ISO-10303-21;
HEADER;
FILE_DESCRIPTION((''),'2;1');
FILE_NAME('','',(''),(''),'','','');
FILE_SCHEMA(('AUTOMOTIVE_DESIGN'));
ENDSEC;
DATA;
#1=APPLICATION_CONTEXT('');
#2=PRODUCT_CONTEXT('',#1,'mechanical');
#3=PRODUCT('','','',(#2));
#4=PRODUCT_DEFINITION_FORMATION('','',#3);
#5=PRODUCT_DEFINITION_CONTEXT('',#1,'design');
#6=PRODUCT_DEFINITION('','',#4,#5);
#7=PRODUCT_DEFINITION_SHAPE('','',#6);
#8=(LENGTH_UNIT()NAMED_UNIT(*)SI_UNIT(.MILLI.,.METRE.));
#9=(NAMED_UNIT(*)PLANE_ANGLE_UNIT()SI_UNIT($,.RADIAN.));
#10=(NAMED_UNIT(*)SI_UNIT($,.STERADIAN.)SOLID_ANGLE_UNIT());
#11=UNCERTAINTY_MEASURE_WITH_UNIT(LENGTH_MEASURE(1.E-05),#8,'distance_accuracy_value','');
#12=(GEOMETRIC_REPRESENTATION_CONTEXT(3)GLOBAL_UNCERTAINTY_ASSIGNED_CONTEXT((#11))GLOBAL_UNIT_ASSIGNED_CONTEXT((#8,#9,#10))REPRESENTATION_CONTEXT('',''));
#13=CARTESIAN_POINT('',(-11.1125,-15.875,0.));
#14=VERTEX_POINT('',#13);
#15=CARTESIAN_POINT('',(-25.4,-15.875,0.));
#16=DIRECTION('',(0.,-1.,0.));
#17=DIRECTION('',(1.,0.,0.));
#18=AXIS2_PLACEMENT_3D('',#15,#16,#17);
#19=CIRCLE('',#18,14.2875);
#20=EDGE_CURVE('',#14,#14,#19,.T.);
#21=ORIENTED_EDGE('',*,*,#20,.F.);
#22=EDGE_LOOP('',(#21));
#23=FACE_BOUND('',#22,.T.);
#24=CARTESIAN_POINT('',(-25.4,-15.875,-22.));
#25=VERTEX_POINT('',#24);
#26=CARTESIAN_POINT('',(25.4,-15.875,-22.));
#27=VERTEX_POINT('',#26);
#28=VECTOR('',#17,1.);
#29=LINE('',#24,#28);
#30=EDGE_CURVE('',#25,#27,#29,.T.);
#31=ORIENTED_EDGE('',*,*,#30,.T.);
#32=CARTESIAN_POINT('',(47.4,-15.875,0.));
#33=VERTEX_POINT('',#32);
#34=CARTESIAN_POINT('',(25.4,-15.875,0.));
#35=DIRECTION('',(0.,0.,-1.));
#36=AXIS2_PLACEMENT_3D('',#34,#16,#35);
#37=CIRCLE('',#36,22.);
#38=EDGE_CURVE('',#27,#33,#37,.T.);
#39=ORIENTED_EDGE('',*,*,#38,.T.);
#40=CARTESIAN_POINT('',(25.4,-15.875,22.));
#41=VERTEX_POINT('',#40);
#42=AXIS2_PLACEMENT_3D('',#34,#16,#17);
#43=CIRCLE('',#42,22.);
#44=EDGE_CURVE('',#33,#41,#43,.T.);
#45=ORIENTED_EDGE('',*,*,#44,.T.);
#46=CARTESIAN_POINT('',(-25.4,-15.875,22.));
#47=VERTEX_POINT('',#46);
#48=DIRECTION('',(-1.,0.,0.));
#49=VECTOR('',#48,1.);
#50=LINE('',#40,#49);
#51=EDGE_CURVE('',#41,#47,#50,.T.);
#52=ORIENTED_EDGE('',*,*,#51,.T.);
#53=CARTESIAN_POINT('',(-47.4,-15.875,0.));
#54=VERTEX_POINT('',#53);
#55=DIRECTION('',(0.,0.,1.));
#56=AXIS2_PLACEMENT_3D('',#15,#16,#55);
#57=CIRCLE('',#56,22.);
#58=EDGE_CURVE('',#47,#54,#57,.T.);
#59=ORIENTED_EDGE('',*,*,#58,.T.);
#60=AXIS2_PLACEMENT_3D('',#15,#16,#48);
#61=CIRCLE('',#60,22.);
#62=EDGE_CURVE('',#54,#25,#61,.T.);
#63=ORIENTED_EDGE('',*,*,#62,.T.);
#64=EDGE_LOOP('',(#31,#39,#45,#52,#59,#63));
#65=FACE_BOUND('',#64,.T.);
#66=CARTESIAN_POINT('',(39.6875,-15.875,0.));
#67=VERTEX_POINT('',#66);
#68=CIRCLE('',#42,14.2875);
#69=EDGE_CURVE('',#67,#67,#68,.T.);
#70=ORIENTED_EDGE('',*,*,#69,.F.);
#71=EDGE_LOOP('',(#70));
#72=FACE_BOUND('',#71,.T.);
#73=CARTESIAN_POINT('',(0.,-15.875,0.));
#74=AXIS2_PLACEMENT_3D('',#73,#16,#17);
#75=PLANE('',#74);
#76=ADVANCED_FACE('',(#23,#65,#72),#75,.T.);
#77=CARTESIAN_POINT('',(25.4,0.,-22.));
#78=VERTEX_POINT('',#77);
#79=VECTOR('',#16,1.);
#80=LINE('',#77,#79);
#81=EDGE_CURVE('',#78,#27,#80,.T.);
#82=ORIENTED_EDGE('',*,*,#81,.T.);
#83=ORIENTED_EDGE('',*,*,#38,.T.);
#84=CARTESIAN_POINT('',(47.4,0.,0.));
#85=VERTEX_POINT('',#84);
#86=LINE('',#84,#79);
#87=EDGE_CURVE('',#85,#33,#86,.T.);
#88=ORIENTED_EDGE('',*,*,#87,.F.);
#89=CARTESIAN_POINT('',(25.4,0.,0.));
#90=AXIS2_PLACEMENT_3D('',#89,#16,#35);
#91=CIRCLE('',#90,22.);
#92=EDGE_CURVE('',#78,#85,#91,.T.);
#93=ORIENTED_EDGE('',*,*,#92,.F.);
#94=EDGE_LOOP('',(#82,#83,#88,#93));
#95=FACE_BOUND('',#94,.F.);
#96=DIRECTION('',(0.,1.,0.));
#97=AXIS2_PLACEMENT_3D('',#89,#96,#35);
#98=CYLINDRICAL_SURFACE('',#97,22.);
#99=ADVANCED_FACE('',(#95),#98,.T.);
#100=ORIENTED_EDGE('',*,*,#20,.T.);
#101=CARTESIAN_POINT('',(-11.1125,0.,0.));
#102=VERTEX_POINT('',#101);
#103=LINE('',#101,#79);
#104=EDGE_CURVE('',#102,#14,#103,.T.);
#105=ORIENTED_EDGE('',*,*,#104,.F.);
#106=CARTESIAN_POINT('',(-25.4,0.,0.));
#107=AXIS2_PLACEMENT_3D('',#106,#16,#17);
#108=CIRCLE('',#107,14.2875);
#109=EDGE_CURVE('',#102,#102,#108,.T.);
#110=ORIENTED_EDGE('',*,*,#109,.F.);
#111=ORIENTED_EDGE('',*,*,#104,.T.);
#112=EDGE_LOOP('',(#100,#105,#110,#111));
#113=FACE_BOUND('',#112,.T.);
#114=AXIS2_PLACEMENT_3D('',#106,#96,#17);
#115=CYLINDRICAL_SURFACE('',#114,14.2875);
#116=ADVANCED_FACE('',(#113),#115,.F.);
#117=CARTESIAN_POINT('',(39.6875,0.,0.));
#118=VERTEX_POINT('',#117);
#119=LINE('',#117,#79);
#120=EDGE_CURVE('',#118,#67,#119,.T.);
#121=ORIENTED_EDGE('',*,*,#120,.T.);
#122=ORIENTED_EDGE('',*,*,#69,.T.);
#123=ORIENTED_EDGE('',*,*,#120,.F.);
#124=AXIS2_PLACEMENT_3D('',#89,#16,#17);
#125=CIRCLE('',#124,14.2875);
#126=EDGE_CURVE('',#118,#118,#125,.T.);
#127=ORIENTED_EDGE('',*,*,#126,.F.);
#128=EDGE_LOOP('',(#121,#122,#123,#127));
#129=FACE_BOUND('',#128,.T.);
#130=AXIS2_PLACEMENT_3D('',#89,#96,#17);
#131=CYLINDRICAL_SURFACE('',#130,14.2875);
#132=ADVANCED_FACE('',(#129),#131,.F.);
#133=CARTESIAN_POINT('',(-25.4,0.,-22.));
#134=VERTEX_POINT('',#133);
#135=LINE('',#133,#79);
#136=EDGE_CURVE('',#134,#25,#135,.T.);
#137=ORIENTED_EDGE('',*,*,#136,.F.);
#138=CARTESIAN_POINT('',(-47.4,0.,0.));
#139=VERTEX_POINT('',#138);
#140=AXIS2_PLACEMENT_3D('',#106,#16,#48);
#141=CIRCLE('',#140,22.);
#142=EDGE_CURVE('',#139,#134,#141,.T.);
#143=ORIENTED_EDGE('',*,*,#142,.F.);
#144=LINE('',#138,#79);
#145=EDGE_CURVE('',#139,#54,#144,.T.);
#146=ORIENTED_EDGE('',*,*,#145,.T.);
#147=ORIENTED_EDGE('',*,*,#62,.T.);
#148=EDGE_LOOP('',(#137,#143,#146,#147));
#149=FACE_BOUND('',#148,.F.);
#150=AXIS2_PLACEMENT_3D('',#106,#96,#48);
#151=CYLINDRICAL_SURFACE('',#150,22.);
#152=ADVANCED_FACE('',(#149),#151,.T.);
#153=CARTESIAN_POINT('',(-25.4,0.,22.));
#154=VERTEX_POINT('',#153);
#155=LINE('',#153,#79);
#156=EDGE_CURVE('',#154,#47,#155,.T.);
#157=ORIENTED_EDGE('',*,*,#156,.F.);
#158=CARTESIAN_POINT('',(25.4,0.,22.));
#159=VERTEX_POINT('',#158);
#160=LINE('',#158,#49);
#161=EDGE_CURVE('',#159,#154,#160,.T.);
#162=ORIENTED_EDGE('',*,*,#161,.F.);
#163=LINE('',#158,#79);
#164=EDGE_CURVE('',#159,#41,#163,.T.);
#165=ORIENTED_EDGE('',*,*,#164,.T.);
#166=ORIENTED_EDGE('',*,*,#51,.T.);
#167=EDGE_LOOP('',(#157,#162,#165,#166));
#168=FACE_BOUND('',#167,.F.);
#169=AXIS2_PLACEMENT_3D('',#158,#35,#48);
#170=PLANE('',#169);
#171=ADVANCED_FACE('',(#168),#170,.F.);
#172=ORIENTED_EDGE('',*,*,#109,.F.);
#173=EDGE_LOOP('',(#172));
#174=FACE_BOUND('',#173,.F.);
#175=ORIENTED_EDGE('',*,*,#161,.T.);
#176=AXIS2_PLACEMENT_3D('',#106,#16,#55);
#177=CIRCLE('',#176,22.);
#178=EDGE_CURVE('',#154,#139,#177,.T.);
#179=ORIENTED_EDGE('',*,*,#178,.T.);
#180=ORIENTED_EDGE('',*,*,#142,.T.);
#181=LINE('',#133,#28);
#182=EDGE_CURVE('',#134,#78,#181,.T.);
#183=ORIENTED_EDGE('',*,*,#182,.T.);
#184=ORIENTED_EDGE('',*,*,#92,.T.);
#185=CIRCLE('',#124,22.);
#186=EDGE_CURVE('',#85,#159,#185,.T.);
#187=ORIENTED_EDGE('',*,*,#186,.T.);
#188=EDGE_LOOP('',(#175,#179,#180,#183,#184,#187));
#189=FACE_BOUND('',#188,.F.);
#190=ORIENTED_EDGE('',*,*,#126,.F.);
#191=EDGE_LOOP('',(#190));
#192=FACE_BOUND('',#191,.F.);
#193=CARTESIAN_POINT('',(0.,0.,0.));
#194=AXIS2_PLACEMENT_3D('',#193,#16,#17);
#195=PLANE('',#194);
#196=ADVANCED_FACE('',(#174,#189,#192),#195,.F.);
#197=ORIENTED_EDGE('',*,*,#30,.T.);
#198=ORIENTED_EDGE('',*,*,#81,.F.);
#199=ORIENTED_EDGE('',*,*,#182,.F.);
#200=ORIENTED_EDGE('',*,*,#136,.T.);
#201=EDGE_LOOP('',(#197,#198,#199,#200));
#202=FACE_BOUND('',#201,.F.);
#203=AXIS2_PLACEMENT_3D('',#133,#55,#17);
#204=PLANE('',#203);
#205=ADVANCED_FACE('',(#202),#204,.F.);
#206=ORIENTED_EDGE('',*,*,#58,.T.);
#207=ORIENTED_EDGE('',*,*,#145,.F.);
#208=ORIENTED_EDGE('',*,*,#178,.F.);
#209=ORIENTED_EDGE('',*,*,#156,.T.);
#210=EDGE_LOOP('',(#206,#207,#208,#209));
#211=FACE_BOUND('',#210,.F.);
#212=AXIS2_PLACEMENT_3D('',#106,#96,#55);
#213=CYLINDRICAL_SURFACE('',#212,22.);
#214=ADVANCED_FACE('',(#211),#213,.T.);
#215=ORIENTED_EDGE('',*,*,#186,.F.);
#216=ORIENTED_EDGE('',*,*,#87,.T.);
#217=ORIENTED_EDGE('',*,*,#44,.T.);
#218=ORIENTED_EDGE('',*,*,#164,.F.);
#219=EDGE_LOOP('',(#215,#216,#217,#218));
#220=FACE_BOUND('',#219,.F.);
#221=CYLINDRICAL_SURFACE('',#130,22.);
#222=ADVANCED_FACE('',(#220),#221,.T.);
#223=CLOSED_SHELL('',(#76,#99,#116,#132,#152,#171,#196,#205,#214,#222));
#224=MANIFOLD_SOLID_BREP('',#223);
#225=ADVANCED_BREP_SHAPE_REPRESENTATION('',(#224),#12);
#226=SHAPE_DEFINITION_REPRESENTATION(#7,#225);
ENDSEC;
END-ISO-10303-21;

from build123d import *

# Parameters (mm, degrees)
F0_R     = 14.2875
F1_DEPTH = 15.875


# Not quite as in the source:
# - a length typed as a fraction of an inch, garbled in the dataset ("3 / 203.2 mm" for 3/8 in), is restored
# - a feature names something its author has since deleted; it is built from what else it names


with BuildPart() as f1:
    # F0 (on Front) → F1 (new body)
    with BuildSketch(Plane.XZ):
        with BuildLine():
            Line((25.4, 22), (-25.4, 22))
            ThreePointArc((-25.4, 22), (-40.9563491861, 15.5563491861), (-47.4, 0))
            ThreePointArc((-47.4, 0), (-40.9563491861, -15.5563491861), (-25.4, -22))
            Line((-25.4, -22), (25.4, -22))
            ThreePointArc((25.4, -22), (40.9563491861, -15.5563491861), (47.4, 0))
            ThreePointArc((47.4, 0), (40.9563491861, 15.5563491861), (25.4, 22))
        make_face()
        with Locations((-25.4, 0)):
            Circle(F0_R, mode=Mode.SUBTRACT)
        with Locations((25.4, 0)):
            Circle(F0_R, mode=Mode.SUBTRACT)
    extrude(amount=F1_DEPTH)


solid = f1.part
